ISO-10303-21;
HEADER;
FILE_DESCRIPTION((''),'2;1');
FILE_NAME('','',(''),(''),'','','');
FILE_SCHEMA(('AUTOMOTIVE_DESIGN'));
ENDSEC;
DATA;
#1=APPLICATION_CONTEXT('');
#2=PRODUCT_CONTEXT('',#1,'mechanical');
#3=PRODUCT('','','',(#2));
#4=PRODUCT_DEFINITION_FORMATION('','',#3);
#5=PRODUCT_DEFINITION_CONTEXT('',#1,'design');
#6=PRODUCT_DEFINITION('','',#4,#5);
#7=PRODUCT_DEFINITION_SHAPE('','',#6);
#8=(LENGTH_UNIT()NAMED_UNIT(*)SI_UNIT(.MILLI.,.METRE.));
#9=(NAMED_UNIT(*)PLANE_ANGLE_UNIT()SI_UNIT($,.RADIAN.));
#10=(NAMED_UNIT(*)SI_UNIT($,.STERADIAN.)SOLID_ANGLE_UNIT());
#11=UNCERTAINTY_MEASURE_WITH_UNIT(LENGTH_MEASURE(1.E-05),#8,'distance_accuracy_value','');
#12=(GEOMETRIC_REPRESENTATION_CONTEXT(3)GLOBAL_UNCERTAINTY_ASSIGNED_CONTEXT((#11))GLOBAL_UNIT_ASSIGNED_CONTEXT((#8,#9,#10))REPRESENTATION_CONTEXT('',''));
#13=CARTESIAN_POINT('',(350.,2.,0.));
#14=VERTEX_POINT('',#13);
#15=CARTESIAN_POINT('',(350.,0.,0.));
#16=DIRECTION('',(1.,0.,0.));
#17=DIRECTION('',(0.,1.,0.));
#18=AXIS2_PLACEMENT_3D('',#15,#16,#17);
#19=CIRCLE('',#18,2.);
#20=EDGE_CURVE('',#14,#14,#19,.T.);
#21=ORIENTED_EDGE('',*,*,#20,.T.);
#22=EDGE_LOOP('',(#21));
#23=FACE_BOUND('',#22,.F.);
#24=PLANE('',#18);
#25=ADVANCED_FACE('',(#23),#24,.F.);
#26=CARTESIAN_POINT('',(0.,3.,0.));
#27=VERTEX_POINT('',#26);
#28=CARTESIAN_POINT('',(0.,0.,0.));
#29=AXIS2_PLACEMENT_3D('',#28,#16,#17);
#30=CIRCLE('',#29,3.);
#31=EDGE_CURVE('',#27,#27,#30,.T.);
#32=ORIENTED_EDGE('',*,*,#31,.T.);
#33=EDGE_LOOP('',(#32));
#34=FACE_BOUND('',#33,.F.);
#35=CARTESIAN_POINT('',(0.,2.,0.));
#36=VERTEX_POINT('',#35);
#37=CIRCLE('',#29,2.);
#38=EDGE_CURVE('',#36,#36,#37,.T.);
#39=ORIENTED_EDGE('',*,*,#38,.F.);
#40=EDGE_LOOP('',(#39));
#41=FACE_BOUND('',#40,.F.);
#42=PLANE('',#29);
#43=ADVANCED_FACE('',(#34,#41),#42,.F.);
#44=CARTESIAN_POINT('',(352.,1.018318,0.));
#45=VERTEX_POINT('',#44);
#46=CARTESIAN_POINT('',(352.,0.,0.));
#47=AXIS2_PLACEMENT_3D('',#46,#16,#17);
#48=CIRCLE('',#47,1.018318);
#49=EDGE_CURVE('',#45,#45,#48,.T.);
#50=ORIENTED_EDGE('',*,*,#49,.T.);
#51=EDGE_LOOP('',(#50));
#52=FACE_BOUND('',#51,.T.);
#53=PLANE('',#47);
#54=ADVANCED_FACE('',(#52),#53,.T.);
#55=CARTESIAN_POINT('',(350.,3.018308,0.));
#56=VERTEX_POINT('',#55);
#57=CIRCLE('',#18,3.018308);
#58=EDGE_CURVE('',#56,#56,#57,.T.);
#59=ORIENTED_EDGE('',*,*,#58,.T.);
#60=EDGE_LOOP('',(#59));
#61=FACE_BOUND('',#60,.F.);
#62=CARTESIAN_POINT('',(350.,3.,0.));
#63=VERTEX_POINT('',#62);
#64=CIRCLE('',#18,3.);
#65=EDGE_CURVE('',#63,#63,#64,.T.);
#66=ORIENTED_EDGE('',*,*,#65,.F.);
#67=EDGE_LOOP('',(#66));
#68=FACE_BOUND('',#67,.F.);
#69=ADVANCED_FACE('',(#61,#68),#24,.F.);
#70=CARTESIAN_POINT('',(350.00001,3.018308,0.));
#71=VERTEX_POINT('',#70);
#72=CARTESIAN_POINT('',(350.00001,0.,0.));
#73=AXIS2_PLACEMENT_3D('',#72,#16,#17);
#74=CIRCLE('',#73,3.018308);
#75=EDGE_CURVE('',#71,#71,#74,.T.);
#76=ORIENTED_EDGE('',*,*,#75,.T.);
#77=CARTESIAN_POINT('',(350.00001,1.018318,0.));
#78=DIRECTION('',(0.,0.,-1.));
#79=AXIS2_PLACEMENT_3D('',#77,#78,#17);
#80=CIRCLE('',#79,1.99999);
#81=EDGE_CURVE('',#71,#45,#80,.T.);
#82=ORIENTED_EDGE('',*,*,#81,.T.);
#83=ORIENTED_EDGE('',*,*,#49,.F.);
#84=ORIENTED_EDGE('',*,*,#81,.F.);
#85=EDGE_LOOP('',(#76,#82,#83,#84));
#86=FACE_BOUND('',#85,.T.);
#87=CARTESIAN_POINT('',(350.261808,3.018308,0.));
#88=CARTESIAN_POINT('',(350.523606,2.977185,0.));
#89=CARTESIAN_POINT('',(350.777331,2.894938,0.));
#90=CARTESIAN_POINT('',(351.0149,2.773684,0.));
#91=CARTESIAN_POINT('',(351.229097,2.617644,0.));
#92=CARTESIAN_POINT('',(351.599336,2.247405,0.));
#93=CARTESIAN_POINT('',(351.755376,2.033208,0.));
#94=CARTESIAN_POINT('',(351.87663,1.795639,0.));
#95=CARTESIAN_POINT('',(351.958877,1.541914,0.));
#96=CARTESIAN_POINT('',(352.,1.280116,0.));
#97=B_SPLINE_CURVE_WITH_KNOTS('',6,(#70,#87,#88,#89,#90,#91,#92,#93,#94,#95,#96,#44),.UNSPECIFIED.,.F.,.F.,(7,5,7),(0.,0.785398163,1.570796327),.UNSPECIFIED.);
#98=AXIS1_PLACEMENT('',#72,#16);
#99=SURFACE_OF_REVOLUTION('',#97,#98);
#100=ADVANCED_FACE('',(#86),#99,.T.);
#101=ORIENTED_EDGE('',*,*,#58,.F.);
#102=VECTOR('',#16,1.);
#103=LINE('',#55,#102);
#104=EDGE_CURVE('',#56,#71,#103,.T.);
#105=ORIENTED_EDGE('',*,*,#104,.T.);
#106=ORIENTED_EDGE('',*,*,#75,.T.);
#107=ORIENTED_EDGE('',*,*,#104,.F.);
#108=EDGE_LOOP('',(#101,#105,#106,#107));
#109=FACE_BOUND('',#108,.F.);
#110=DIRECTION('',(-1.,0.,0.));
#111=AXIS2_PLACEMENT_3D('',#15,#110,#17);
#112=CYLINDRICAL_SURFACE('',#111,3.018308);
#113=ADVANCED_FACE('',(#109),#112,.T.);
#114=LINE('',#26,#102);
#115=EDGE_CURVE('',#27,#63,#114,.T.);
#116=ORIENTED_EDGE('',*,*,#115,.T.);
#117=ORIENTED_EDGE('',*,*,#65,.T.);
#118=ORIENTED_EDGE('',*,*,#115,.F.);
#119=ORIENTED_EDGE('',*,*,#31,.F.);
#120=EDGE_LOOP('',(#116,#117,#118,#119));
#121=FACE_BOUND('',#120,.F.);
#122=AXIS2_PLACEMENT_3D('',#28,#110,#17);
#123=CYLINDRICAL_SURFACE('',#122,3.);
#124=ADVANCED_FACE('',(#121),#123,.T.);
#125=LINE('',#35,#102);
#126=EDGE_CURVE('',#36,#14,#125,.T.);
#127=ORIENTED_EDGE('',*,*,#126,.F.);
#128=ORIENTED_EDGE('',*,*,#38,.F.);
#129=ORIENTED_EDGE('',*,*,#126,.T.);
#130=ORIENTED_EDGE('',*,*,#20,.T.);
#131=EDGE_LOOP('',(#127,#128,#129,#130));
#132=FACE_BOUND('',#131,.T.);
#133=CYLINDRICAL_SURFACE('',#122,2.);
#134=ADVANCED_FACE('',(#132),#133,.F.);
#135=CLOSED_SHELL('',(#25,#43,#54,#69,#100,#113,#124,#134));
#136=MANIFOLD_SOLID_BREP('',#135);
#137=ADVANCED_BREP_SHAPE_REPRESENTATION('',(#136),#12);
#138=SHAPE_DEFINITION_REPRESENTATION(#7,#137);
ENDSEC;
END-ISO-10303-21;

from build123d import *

# Parameters (mm, degrees)
F0_R     = 3
F0_R_2   = 2
F1_DEPTH = 350
F2_R     = 3.0183078128
F3_DEPTH = 2
F4_R     = 1.99999


# Not quite as in the source:
# - a fillet or chamfer is up to 0.001 mm smaller than in the source, because OpenCascade refuses the exact size


with BuildPart() as f1:
    # F0 (on Right) → F1 (new body)
    with BuildSketch(Plane.YZ):
        Circle(F0_R)
        Circle(F0_R_2, mode=Mode.SUBTRACT)
    extrude(amount=F1_DEPTH)

    # F2 (on face) → F3 (join)
    with BuildSketch(Plane.YZ.offset(350)):
        Circle(F2_R)
    extrude(amount=F3_DEPTH)

    # F4 (radius 2 in the source; OpenCascade refuses exactly that, so slightly less here)
    f4_edges = [f1.edges().sort_by_distance(p)[0] for p in [
        (352, -3.018308, 0),
    ]]
    fillet(f4_edges, radius=F4_R)


solid = f1.part
